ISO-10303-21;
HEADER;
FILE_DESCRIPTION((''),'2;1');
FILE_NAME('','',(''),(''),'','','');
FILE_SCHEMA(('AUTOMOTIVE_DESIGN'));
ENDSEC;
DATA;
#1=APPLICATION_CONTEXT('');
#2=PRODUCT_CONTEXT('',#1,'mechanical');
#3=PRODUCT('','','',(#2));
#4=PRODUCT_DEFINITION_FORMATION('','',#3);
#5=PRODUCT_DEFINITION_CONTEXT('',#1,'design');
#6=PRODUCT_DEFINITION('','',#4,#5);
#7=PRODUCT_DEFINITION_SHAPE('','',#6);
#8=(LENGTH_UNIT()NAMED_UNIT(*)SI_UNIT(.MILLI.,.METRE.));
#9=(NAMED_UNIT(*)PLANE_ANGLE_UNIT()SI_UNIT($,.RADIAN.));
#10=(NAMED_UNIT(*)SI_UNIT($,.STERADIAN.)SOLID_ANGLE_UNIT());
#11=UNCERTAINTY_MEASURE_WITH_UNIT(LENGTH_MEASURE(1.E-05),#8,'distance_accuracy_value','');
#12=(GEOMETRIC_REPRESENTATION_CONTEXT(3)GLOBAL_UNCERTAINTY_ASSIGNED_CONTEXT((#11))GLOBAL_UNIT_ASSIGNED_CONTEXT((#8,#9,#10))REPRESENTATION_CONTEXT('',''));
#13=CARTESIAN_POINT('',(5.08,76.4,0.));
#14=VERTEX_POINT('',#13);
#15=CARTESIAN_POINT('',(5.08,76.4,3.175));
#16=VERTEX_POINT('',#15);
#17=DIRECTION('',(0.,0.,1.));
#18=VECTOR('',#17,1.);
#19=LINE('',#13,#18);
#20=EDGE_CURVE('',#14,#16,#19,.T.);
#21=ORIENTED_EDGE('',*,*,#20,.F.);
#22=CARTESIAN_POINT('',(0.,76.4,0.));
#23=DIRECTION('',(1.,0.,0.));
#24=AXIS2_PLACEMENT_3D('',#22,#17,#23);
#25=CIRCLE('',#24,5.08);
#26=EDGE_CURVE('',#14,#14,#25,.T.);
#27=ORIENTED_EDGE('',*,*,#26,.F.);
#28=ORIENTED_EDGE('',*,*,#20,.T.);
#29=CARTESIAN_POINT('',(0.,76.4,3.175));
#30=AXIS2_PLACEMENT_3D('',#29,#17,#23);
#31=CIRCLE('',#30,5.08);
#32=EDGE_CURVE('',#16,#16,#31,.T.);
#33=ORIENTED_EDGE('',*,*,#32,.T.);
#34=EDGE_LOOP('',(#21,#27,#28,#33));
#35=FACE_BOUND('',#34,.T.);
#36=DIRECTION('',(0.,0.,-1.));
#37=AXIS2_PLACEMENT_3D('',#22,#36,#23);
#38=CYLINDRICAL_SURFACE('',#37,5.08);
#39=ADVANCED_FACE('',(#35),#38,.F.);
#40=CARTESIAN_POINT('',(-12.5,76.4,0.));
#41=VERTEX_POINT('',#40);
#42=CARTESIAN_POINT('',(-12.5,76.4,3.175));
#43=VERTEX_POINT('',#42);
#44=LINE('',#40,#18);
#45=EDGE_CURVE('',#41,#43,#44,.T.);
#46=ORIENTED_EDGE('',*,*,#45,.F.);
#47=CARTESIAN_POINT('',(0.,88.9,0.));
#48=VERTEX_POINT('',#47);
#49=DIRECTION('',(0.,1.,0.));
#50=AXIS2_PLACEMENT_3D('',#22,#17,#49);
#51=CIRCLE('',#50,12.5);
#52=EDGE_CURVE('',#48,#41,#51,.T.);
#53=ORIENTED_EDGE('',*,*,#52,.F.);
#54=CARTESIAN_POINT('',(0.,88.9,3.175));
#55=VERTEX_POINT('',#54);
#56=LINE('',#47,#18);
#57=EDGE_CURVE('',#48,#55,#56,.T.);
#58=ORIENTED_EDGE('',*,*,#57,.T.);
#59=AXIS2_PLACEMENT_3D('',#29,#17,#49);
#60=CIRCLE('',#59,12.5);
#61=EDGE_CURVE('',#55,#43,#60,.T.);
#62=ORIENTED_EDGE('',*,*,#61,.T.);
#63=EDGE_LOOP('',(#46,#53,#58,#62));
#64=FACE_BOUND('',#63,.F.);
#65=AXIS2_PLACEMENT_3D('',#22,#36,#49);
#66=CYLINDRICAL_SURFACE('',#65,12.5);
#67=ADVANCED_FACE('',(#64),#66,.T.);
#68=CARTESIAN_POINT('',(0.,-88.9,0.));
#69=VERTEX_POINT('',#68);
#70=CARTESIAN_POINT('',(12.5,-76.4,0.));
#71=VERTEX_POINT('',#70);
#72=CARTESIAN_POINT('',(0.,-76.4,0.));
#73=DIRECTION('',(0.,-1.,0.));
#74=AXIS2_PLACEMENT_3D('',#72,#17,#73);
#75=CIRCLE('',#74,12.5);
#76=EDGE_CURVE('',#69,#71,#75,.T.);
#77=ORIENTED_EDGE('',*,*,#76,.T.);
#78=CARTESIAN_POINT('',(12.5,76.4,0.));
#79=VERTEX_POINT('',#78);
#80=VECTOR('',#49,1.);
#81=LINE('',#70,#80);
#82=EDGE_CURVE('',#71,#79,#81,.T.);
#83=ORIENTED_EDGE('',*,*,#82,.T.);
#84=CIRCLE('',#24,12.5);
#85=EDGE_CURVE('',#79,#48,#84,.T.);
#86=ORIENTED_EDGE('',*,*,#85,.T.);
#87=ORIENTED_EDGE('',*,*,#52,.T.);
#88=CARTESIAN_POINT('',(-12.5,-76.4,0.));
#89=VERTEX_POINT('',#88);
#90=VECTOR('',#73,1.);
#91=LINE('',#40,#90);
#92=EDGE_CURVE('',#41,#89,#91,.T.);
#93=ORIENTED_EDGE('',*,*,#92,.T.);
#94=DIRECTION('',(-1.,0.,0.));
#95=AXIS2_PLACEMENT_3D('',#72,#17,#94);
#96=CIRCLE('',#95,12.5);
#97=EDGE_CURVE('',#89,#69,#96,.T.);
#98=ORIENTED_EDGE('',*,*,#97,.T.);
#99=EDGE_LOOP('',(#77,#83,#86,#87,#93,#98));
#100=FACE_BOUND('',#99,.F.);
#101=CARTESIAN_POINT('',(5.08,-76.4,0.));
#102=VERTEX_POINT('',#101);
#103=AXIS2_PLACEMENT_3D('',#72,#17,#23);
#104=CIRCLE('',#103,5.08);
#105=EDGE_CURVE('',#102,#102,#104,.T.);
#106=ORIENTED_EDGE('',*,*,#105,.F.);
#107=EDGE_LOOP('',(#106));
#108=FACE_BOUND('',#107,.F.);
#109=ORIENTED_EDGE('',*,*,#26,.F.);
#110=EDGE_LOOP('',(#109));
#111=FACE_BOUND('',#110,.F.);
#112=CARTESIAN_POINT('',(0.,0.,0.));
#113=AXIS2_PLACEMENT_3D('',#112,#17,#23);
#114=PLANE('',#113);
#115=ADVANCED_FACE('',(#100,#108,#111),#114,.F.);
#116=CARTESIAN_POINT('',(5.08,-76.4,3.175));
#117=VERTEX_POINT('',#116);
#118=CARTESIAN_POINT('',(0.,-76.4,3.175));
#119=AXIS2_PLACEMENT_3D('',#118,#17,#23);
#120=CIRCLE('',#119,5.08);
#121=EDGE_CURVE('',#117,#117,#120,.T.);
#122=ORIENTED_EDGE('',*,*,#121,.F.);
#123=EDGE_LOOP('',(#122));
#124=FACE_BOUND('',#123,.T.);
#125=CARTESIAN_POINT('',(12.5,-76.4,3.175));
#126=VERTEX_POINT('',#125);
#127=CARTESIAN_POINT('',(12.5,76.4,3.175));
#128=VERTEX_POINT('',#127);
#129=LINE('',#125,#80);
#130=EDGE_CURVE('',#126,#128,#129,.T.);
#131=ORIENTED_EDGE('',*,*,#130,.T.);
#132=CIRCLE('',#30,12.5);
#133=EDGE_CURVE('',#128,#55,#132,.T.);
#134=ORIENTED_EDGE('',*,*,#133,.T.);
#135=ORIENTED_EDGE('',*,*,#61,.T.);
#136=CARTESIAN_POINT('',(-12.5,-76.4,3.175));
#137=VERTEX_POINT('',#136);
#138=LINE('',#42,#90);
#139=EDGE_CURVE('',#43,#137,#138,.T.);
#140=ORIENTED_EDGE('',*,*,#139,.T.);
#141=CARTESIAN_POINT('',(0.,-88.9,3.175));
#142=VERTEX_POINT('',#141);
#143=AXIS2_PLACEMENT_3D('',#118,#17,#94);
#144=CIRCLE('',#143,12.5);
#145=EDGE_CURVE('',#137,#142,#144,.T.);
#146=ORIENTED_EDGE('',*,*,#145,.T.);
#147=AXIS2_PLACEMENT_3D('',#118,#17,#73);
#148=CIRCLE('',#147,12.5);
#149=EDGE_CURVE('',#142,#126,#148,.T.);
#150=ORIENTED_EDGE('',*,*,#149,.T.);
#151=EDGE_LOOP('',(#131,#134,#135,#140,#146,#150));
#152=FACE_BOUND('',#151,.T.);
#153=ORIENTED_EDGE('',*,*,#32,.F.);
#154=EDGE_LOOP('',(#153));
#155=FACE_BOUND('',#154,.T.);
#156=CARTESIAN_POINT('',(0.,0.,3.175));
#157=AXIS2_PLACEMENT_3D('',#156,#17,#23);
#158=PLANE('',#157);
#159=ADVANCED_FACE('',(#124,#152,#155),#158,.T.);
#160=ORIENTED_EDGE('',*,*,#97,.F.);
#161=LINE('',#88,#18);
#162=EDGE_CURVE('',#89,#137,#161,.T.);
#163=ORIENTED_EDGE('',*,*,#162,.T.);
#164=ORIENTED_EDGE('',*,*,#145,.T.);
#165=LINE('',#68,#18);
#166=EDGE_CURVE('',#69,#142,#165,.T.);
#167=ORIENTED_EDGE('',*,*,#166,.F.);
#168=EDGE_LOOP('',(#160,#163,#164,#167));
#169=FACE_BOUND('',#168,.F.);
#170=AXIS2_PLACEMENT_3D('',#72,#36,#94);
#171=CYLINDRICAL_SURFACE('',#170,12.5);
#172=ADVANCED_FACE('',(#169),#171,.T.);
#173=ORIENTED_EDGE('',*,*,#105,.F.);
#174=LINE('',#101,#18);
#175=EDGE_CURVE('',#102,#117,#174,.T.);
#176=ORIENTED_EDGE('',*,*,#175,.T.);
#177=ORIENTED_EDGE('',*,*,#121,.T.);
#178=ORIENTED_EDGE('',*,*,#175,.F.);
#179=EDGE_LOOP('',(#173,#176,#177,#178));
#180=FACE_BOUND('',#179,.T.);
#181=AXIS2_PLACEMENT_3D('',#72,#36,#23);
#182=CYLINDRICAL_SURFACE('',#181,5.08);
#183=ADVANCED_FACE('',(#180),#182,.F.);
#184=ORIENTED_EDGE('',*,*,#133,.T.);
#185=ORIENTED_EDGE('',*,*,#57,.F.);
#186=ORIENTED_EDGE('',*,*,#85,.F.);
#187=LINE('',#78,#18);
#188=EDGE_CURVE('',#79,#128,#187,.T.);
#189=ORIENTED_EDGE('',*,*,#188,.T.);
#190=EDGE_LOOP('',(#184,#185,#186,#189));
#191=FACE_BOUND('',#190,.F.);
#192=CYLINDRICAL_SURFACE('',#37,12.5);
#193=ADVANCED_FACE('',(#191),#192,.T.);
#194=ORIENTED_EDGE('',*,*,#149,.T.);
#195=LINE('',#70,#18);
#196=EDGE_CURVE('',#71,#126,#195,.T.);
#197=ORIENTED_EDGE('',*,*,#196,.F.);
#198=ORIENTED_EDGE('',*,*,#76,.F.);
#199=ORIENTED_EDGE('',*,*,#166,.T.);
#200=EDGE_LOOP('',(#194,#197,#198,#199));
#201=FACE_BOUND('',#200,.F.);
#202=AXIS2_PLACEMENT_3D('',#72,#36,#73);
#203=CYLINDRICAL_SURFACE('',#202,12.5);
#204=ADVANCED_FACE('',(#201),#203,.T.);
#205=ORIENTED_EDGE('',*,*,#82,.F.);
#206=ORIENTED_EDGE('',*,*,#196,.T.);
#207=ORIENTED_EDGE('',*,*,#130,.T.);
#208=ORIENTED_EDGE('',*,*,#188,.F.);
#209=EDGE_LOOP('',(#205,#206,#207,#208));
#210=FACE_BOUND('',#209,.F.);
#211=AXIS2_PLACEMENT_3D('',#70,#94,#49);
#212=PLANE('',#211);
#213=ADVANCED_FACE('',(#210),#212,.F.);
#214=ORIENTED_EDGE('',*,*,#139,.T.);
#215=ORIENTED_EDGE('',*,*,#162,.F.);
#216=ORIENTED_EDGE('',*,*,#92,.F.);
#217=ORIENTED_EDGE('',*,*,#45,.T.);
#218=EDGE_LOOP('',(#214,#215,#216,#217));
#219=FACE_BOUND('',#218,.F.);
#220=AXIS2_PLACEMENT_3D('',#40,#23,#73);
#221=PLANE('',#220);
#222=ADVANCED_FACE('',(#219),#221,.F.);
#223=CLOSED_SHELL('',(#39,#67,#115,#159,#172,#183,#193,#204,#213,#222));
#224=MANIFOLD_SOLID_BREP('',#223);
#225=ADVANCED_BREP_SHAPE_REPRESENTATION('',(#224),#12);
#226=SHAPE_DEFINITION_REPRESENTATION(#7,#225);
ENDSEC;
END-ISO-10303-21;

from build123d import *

# Parameters (mm, degrees)
F0_R     = 5.08
F1_DEPTH = 3.175


# Not quite as in the source:
# - a length typed as a fraction of an inch, garbled in the dataset ("3 / 203.2 mm" for 3/8 in), is restored


with BuildPart() as f1:
    # F0 (on Top) → F1 (new body)
    with BuildSketch(Plane.XY):
        with BuildLine():
            Line((12.5, -76.4), (12.5, 76.4))
            ThreePointArc((12.5, 76.4), (8.8388347648, 85.2388347648), (0, 88.9))
            ThreePointArc((0, 88.9), (-8.8388347648, 85.2388347648), (-12.5, 76.4))
            Line((-12.5, 76.4), (-12.5, -76.4))
            ThreePointArc((-12.5, -76.4), (-8.8388347648, -85.2388347648), (0, -88.9))
            ThreePointArc((0, -88.9), (8.8388347648, -85.2388347648), (12.5, -76.4))
        make_face()
        with Locations((0, -76.4)):
            Circle(F0_R, mode=Mode.SUBTRACT)
        with Locations((0, 76.4)):
            Circle(F0_R, mode=Mode.SUBTRACT)
    extrude(amount=F1_DEPTH)


solid = f1.part
